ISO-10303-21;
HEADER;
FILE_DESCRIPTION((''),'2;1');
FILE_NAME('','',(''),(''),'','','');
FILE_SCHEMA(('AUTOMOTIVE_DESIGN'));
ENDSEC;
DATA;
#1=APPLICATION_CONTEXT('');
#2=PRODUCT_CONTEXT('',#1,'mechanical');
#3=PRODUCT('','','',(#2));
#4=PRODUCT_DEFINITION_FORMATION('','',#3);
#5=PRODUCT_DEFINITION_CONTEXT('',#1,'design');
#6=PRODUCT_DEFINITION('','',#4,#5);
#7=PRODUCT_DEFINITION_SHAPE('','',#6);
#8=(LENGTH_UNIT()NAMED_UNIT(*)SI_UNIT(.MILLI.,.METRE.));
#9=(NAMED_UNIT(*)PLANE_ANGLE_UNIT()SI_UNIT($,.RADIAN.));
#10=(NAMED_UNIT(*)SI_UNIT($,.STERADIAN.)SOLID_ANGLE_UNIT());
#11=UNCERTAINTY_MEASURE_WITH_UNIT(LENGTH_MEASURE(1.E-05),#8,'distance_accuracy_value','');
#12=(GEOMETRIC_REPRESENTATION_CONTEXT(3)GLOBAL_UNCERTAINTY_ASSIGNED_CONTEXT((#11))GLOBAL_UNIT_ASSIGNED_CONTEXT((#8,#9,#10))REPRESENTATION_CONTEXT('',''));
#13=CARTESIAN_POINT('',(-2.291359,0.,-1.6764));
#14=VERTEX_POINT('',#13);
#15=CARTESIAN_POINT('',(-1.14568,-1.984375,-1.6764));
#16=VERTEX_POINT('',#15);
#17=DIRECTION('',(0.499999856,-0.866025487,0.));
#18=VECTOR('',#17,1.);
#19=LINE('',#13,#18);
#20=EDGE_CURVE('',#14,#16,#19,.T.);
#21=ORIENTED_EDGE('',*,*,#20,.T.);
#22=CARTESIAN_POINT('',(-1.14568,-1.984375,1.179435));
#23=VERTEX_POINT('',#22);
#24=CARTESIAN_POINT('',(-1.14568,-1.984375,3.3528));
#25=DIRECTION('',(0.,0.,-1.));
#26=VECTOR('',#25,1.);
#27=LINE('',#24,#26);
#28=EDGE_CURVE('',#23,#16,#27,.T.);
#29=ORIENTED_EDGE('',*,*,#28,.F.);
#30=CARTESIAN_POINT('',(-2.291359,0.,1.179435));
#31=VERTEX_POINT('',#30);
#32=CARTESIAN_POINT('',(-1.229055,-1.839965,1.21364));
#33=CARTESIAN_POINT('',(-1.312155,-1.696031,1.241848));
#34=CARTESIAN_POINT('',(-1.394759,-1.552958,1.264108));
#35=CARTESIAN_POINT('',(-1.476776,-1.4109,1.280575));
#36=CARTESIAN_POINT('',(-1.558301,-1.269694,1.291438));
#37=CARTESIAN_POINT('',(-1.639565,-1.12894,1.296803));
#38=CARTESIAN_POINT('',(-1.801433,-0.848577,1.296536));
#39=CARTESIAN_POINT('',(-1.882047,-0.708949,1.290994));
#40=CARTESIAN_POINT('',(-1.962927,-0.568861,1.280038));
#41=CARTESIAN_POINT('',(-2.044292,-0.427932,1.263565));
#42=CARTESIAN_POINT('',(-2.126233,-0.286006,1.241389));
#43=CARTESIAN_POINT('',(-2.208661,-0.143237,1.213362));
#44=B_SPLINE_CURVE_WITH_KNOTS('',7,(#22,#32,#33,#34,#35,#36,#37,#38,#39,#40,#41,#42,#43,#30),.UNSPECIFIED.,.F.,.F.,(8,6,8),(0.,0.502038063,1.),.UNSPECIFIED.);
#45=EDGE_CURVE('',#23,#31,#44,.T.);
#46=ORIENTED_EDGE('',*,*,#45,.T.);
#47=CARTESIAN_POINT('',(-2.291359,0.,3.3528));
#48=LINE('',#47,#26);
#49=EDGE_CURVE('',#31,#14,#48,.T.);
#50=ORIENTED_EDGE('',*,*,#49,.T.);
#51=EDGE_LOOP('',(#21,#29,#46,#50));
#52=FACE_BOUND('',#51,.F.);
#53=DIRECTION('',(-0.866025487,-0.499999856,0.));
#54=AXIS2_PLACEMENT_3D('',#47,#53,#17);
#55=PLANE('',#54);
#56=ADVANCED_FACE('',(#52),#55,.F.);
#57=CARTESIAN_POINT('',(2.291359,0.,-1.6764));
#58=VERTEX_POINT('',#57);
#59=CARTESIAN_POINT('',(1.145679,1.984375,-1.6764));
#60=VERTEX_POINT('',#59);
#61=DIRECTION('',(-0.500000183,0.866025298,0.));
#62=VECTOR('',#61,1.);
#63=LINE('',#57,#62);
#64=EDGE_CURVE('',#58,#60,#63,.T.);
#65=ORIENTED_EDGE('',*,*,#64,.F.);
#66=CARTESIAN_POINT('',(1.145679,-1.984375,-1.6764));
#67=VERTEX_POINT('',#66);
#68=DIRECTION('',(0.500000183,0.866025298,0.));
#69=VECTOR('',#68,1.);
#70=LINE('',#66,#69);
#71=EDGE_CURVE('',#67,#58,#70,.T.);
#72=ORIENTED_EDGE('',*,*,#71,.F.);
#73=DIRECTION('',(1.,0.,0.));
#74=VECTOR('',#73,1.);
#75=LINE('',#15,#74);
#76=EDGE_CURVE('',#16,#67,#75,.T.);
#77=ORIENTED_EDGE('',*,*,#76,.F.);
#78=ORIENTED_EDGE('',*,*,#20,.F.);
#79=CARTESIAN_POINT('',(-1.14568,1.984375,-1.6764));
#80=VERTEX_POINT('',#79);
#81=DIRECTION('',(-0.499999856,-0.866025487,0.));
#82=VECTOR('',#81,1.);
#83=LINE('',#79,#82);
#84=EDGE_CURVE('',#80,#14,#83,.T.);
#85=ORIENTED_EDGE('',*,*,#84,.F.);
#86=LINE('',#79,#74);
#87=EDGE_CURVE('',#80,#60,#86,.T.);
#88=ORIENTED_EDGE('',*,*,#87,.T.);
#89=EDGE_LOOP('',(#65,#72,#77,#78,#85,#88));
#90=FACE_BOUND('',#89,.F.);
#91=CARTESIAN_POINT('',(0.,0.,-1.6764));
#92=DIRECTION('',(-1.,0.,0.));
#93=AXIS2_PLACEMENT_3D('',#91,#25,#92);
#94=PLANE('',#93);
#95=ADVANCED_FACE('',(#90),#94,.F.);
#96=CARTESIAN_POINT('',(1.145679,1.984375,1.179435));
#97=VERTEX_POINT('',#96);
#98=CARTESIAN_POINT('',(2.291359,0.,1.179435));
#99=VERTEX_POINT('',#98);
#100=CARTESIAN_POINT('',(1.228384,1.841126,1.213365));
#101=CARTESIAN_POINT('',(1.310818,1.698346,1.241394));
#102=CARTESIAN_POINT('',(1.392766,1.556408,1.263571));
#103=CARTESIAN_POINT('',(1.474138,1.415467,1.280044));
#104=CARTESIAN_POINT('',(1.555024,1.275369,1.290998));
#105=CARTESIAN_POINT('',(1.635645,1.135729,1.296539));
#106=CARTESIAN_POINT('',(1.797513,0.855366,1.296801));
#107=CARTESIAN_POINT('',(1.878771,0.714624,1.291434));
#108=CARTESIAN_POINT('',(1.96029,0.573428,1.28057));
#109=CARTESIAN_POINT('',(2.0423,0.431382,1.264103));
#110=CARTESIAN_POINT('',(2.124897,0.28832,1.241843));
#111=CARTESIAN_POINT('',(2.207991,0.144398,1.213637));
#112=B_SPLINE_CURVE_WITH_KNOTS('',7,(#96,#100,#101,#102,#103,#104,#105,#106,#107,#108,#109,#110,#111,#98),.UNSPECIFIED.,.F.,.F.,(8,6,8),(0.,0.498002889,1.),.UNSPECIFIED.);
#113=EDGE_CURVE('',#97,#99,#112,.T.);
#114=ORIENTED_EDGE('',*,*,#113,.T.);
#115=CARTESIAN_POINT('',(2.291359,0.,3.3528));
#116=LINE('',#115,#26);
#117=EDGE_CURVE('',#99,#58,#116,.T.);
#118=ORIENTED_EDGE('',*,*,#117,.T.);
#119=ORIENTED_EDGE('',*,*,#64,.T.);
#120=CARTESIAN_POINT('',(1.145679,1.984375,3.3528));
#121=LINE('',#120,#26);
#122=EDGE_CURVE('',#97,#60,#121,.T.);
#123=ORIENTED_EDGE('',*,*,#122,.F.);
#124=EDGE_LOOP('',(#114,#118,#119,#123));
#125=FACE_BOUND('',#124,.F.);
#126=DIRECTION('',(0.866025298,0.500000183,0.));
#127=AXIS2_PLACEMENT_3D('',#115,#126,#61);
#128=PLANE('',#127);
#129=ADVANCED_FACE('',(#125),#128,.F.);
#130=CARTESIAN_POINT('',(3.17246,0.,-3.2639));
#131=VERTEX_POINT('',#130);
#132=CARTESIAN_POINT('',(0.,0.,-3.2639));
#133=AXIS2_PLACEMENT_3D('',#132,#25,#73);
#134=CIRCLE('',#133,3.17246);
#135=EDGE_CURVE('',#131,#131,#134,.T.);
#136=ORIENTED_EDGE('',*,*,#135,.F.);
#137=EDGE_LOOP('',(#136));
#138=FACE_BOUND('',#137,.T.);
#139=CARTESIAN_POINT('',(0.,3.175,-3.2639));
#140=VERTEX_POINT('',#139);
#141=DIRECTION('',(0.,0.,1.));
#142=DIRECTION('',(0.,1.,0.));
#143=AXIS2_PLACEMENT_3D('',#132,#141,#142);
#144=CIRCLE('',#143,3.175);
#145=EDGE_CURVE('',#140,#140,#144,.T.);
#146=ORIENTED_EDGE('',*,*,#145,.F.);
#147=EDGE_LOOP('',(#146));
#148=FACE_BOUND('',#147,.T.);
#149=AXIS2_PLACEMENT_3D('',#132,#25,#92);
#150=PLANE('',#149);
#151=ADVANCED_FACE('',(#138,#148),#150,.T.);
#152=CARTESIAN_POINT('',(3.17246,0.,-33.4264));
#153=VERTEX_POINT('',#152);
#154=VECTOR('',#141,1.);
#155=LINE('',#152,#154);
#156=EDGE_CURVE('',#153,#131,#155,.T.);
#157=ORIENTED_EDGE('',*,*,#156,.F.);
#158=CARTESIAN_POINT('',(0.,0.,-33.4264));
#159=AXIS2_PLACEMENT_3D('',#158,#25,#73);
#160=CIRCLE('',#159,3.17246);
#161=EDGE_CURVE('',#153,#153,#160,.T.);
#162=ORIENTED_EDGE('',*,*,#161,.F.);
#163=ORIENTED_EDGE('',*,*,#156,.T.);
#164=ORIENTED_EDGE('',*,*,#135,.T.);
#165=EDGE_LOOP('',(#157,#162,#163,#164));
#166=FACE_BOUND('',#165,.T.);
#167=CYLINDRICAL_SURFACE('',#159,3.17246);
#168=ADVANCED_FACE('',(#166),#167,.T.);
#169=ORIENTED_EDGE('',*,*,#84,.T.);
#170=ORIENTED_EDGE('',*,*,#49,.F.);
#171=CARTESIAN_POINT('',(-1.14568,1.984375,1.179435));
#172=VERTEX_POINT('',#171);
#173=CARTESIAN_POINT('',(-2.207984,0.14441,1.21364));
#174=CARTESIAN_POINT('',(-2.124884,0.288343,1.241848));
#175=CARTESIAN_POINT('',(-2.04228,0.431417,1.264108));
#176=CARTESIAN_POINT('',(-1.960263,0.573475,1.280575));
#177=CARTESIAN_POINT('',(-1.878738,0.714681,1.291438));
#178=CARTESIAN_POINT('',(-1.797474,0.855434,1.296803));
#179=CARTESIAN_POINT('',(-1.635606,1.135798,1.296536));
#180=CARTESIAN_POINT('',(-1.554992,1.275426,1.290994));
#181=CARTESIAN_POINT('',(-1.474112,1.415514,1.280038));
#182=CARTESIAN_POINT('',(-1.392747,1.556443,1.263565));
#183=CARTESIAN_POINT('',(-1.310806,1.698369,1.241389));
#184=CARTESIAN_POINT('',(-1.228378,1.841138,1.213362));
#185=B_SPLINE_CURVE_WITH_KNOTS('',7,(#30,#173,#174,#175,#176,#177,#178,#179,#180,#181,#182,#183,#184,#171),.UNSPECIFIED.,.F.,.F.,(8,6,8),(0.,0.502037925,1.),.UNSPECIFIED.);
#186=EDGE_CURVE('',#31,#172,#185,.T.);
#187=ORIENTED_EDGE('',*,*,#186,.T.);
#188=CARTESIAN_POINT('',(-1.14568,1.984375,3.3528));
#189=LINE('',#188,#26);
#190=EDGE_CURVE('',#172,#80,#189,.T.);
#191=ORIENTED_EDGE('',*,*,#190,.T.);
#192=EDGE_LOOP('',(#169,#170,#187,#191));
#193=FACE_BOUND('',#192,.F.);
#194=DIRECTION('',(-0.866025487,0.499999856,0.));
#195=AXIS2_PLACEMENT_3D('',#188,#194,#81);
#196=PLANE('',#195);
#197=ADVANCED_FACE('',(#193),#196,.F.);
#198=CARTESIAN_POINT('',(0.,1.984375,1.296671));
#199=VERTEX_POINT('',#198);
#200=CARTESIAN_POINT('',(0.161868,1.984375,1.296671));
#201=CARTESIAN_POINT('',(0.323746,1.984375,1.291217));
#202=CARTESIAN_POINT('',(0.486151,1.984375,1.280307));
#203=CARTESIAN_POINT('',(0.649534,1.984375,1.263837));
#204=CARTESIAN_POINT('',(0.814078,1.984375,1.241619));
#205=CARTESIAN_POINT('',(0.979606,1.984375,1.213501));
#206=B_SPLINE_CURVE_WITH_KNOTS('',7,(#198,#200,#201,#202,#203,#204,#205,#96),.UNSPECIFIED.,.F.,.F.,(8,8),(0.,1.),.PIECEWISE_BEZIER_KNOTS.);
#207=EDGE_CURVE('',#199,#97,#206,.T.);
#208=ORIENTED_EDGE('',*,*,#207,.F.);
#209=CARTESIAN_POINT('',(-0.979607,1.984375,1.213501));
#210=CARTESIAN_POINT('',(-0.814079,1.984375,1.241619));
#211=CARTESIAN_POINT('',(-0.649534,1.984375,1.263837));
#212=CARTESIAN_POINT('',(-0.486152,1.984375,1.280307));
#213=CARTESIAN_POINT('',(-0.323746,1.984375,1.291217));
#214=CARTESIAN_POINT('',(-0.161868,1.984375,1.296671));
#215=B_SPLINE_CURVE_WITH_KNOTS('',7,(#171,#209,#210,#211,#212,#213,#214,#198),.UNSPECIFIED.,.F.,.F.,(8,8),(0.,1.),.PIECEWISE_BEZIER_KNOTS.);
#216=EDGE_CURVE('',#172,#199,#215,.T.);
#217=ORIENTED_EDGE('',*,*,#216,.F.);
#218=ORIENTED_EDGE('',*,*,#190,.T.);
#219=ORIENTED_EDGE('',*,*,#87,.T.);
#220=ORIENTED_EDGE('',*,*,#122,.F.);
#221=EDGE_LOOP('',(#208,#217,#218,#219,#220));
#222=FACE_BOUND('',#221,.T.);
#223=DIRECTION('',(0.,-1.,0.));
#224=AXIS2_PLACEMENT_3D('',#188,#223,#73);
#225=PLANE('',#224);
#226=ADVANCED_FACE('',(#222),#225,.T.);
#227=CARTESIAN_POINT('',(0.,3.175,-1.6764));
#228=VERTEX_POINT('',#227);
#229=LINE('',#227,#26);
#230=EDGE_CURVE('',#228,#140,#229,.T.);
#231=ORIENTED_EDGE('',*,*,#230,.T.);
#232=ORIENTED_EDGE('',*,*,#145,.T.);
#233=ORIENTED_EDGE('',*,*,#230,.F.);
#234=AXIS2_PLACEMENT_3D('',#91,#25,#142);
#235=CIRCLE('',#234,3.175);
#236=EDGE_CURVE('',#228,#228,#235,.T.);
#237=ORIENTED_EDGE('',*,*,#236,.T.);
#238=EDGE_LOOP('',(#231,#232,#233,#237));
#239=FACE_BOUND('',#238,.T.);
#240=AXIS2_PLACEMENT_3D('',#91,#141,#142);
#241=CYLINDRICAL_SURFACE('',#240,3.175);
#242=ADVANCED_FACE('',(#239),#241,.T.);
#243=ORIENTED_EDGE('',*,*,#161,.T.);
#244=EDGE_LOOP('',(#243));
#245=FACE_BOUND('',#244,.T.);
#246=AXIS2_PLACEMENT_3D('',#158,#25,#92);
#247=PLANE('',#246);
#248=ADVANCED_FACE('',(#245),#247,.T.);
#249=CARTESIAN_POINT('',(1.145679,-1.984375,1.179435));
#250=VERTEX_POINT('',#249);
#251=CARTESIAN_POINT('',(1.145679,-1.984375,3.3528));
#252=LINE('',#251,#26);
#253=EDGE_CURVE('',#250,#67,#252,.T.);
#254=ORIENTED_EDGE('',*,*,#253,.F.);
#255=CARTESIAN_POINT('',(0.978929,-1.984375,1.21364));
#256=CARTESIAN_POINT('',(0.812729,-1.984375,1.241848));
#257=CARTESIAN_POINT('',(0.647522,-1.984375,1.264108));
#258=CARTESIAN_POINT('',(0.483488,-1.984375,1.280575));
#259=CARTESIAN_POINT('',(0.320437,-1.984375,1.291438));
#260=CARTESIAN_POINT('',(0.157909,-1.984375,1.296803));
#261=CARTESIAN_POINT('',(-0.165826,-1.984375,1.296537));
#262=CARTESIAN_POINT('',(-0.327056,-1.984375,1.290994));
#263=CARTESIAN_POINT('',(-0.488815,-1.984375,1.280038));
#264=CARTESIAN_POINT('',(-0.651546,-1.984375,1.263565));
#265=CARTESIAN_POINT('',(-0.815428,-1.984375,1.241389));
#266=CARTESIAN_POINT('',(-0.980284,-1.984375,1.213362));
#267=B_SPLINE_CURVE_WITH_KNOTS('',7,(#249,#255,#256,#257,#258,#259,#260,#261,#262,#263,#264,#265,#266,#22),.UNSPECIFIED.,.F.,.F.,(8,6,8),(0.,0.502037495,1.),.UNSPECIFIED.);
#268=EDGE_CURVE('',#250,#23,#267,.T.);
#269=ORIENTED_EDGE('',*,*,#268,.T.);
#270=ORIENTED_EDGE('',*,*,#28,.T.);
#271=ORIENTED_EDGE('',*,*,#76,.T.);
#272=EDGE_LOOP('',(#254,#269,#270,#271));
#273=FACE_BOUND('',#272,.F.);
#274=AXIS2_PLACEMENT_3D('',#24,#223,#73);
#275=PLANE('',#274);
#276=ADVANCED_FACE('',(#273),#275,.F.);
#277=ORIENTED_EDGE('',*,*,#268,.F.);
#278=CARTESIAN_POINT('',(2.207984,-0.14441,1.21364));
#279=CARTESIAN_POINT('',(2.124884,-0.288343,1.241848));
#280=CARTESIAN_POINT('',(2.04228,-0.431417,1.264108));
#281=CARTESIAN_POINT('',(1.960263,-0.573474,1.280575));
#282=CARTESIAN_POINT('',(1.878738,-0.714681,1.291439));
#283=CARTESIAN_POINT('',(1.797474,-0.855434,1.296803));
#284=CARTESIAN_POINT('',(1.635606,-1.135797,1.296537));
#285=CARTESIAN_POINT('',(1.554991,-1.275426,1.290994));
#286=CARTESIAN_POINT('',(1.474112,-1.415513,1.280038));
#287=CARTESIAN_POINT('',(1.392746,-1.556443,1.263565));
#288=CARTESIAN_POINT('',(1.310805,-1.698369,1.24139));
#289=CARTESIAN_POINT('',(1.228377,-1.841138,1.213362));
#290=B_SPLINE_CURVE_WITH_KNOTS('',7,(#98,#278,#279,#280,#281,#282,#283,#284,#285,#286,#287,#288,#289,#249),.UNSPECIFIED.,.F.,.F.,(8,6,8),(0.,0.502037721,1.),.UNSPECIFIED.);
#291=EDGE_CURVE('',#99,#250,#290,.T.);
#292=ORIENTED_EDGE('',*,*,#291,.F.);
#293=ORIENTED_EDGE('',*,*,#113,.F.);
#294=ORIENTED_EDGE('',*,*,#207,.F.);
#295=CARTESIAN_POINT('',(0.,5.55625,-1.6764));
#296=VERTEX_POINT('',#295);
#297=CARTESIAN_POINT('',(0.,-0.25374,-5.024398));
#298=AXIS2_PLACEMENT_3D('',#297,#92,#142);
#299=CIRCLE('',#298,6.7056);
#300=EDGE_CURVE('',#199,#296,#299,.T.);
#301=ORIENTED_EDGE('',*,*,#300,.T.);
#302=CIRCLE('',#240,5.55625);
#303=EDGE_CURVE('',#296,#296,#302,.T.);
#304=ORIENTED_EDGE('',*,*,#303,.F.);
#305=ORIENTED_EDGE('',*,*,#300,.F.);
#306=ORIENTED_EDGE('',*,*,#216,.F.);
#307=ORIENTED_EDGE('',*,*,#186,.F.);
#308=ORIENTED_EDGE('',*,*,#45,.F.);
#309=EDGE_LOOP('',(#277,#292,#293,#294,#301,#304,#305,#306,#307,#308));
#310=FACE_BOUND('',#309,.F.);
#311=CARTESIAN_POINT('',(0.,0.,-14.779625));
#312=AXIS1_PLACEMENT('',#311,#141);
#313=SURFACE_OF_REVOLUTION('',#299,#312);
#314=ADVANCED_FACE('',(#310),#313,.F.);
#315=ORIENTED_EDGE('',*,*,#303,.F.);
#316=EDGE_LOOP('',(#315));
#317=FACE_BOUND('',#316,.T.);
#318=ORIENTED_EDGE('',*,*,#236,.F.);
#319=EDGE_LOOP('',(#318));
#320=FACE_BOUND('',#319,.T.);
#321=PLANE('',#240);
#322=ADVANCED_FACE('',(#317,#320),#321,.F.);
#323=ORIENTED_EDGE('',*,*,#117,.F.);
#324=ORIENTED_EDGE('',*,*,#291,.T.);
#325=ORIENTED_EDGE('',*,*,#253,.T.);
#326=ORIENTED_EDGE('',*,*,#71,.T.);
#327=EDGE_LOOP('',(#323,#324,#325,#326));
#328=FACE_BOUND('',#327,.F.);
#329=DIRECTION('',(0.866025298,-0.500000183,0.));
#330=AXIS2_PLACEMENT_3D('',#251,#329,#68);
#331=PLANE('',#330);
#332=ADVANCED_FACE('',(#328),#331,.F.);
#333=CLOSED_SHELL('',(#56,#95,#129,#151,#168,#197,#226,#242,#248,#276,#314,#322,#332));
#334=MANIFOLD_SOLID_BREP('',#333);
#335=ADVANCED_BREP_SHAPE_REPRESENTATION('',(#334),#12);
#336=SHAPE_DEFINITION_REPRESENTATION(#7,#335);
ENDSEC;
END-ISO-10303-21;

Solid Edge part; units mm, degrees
sketch "Sketch1" plane through (0, 0, 0) normal (1, 0, 0) x (0, 1, 0)
  line L0 (0, -1.6764) -> (0, 1.6764)
  arc A0 (0, 1.6764) -> (5.55625, -1.6764) centre (-0.25374, -5.024398) cw
  line L1 (0, -1.6764) -> (5.55625, -1.6764)
  dimension "D1" = 3.3528
  dimension "D2" = 6.7056
revolve "RevolvedProtrusion1" add sketch "Sketch1" angle 360 about axis through (0, 0, -14.779625) along (0, 0, 1)
sketch "Sketch2" plane through (0, 0, -1.6764) normal (0, 0, -1) x (0, 1, 0)
  circle A0 centre (0, 0) radius 3.175
  dimension "D1" = 6.35
extrude "Protrusion1" add sketch "Sketch2" along normal blind 31.75
sketch "Sketch3" plane through (0, 0, -33.4264) normal (0, 0, -1) x (1, 0, 0)
  circle A0 centre (0, 0) radius 3.17246
  dimension "D1" = 0.0025
extrude "Cutout1" cut sketch "Sketch3" against normal blind 30.1625 flip side to cut
sketch "Sketch4" plane through (-0.603226, 0.360624, 3.3528) normal (0, 0, 1) x (1, 0, 0)
  line L0 (-0.542454, 1.623751) -> (1.748905, 1.623751)
  line L1 (2.894585, -0.360624) -> (1.748905, 1.623751)
  line L2 (1.748905, -2.344999) -> (2.894585, -0.360624)
  line L3 (-0.542454, -2.344999) -> (1.748905, -2.344999)
  line L4 (-1.688133, -0.360624) -> (-0.542454, -2.344999)
  line L5 (-0.542454, 1.623751) -> (-1.688133, -0.360624)
extrude "ExtrudedCutout_11" cut sketch "Sketch4" against normal blind 5.0292
properties part number "171348"
